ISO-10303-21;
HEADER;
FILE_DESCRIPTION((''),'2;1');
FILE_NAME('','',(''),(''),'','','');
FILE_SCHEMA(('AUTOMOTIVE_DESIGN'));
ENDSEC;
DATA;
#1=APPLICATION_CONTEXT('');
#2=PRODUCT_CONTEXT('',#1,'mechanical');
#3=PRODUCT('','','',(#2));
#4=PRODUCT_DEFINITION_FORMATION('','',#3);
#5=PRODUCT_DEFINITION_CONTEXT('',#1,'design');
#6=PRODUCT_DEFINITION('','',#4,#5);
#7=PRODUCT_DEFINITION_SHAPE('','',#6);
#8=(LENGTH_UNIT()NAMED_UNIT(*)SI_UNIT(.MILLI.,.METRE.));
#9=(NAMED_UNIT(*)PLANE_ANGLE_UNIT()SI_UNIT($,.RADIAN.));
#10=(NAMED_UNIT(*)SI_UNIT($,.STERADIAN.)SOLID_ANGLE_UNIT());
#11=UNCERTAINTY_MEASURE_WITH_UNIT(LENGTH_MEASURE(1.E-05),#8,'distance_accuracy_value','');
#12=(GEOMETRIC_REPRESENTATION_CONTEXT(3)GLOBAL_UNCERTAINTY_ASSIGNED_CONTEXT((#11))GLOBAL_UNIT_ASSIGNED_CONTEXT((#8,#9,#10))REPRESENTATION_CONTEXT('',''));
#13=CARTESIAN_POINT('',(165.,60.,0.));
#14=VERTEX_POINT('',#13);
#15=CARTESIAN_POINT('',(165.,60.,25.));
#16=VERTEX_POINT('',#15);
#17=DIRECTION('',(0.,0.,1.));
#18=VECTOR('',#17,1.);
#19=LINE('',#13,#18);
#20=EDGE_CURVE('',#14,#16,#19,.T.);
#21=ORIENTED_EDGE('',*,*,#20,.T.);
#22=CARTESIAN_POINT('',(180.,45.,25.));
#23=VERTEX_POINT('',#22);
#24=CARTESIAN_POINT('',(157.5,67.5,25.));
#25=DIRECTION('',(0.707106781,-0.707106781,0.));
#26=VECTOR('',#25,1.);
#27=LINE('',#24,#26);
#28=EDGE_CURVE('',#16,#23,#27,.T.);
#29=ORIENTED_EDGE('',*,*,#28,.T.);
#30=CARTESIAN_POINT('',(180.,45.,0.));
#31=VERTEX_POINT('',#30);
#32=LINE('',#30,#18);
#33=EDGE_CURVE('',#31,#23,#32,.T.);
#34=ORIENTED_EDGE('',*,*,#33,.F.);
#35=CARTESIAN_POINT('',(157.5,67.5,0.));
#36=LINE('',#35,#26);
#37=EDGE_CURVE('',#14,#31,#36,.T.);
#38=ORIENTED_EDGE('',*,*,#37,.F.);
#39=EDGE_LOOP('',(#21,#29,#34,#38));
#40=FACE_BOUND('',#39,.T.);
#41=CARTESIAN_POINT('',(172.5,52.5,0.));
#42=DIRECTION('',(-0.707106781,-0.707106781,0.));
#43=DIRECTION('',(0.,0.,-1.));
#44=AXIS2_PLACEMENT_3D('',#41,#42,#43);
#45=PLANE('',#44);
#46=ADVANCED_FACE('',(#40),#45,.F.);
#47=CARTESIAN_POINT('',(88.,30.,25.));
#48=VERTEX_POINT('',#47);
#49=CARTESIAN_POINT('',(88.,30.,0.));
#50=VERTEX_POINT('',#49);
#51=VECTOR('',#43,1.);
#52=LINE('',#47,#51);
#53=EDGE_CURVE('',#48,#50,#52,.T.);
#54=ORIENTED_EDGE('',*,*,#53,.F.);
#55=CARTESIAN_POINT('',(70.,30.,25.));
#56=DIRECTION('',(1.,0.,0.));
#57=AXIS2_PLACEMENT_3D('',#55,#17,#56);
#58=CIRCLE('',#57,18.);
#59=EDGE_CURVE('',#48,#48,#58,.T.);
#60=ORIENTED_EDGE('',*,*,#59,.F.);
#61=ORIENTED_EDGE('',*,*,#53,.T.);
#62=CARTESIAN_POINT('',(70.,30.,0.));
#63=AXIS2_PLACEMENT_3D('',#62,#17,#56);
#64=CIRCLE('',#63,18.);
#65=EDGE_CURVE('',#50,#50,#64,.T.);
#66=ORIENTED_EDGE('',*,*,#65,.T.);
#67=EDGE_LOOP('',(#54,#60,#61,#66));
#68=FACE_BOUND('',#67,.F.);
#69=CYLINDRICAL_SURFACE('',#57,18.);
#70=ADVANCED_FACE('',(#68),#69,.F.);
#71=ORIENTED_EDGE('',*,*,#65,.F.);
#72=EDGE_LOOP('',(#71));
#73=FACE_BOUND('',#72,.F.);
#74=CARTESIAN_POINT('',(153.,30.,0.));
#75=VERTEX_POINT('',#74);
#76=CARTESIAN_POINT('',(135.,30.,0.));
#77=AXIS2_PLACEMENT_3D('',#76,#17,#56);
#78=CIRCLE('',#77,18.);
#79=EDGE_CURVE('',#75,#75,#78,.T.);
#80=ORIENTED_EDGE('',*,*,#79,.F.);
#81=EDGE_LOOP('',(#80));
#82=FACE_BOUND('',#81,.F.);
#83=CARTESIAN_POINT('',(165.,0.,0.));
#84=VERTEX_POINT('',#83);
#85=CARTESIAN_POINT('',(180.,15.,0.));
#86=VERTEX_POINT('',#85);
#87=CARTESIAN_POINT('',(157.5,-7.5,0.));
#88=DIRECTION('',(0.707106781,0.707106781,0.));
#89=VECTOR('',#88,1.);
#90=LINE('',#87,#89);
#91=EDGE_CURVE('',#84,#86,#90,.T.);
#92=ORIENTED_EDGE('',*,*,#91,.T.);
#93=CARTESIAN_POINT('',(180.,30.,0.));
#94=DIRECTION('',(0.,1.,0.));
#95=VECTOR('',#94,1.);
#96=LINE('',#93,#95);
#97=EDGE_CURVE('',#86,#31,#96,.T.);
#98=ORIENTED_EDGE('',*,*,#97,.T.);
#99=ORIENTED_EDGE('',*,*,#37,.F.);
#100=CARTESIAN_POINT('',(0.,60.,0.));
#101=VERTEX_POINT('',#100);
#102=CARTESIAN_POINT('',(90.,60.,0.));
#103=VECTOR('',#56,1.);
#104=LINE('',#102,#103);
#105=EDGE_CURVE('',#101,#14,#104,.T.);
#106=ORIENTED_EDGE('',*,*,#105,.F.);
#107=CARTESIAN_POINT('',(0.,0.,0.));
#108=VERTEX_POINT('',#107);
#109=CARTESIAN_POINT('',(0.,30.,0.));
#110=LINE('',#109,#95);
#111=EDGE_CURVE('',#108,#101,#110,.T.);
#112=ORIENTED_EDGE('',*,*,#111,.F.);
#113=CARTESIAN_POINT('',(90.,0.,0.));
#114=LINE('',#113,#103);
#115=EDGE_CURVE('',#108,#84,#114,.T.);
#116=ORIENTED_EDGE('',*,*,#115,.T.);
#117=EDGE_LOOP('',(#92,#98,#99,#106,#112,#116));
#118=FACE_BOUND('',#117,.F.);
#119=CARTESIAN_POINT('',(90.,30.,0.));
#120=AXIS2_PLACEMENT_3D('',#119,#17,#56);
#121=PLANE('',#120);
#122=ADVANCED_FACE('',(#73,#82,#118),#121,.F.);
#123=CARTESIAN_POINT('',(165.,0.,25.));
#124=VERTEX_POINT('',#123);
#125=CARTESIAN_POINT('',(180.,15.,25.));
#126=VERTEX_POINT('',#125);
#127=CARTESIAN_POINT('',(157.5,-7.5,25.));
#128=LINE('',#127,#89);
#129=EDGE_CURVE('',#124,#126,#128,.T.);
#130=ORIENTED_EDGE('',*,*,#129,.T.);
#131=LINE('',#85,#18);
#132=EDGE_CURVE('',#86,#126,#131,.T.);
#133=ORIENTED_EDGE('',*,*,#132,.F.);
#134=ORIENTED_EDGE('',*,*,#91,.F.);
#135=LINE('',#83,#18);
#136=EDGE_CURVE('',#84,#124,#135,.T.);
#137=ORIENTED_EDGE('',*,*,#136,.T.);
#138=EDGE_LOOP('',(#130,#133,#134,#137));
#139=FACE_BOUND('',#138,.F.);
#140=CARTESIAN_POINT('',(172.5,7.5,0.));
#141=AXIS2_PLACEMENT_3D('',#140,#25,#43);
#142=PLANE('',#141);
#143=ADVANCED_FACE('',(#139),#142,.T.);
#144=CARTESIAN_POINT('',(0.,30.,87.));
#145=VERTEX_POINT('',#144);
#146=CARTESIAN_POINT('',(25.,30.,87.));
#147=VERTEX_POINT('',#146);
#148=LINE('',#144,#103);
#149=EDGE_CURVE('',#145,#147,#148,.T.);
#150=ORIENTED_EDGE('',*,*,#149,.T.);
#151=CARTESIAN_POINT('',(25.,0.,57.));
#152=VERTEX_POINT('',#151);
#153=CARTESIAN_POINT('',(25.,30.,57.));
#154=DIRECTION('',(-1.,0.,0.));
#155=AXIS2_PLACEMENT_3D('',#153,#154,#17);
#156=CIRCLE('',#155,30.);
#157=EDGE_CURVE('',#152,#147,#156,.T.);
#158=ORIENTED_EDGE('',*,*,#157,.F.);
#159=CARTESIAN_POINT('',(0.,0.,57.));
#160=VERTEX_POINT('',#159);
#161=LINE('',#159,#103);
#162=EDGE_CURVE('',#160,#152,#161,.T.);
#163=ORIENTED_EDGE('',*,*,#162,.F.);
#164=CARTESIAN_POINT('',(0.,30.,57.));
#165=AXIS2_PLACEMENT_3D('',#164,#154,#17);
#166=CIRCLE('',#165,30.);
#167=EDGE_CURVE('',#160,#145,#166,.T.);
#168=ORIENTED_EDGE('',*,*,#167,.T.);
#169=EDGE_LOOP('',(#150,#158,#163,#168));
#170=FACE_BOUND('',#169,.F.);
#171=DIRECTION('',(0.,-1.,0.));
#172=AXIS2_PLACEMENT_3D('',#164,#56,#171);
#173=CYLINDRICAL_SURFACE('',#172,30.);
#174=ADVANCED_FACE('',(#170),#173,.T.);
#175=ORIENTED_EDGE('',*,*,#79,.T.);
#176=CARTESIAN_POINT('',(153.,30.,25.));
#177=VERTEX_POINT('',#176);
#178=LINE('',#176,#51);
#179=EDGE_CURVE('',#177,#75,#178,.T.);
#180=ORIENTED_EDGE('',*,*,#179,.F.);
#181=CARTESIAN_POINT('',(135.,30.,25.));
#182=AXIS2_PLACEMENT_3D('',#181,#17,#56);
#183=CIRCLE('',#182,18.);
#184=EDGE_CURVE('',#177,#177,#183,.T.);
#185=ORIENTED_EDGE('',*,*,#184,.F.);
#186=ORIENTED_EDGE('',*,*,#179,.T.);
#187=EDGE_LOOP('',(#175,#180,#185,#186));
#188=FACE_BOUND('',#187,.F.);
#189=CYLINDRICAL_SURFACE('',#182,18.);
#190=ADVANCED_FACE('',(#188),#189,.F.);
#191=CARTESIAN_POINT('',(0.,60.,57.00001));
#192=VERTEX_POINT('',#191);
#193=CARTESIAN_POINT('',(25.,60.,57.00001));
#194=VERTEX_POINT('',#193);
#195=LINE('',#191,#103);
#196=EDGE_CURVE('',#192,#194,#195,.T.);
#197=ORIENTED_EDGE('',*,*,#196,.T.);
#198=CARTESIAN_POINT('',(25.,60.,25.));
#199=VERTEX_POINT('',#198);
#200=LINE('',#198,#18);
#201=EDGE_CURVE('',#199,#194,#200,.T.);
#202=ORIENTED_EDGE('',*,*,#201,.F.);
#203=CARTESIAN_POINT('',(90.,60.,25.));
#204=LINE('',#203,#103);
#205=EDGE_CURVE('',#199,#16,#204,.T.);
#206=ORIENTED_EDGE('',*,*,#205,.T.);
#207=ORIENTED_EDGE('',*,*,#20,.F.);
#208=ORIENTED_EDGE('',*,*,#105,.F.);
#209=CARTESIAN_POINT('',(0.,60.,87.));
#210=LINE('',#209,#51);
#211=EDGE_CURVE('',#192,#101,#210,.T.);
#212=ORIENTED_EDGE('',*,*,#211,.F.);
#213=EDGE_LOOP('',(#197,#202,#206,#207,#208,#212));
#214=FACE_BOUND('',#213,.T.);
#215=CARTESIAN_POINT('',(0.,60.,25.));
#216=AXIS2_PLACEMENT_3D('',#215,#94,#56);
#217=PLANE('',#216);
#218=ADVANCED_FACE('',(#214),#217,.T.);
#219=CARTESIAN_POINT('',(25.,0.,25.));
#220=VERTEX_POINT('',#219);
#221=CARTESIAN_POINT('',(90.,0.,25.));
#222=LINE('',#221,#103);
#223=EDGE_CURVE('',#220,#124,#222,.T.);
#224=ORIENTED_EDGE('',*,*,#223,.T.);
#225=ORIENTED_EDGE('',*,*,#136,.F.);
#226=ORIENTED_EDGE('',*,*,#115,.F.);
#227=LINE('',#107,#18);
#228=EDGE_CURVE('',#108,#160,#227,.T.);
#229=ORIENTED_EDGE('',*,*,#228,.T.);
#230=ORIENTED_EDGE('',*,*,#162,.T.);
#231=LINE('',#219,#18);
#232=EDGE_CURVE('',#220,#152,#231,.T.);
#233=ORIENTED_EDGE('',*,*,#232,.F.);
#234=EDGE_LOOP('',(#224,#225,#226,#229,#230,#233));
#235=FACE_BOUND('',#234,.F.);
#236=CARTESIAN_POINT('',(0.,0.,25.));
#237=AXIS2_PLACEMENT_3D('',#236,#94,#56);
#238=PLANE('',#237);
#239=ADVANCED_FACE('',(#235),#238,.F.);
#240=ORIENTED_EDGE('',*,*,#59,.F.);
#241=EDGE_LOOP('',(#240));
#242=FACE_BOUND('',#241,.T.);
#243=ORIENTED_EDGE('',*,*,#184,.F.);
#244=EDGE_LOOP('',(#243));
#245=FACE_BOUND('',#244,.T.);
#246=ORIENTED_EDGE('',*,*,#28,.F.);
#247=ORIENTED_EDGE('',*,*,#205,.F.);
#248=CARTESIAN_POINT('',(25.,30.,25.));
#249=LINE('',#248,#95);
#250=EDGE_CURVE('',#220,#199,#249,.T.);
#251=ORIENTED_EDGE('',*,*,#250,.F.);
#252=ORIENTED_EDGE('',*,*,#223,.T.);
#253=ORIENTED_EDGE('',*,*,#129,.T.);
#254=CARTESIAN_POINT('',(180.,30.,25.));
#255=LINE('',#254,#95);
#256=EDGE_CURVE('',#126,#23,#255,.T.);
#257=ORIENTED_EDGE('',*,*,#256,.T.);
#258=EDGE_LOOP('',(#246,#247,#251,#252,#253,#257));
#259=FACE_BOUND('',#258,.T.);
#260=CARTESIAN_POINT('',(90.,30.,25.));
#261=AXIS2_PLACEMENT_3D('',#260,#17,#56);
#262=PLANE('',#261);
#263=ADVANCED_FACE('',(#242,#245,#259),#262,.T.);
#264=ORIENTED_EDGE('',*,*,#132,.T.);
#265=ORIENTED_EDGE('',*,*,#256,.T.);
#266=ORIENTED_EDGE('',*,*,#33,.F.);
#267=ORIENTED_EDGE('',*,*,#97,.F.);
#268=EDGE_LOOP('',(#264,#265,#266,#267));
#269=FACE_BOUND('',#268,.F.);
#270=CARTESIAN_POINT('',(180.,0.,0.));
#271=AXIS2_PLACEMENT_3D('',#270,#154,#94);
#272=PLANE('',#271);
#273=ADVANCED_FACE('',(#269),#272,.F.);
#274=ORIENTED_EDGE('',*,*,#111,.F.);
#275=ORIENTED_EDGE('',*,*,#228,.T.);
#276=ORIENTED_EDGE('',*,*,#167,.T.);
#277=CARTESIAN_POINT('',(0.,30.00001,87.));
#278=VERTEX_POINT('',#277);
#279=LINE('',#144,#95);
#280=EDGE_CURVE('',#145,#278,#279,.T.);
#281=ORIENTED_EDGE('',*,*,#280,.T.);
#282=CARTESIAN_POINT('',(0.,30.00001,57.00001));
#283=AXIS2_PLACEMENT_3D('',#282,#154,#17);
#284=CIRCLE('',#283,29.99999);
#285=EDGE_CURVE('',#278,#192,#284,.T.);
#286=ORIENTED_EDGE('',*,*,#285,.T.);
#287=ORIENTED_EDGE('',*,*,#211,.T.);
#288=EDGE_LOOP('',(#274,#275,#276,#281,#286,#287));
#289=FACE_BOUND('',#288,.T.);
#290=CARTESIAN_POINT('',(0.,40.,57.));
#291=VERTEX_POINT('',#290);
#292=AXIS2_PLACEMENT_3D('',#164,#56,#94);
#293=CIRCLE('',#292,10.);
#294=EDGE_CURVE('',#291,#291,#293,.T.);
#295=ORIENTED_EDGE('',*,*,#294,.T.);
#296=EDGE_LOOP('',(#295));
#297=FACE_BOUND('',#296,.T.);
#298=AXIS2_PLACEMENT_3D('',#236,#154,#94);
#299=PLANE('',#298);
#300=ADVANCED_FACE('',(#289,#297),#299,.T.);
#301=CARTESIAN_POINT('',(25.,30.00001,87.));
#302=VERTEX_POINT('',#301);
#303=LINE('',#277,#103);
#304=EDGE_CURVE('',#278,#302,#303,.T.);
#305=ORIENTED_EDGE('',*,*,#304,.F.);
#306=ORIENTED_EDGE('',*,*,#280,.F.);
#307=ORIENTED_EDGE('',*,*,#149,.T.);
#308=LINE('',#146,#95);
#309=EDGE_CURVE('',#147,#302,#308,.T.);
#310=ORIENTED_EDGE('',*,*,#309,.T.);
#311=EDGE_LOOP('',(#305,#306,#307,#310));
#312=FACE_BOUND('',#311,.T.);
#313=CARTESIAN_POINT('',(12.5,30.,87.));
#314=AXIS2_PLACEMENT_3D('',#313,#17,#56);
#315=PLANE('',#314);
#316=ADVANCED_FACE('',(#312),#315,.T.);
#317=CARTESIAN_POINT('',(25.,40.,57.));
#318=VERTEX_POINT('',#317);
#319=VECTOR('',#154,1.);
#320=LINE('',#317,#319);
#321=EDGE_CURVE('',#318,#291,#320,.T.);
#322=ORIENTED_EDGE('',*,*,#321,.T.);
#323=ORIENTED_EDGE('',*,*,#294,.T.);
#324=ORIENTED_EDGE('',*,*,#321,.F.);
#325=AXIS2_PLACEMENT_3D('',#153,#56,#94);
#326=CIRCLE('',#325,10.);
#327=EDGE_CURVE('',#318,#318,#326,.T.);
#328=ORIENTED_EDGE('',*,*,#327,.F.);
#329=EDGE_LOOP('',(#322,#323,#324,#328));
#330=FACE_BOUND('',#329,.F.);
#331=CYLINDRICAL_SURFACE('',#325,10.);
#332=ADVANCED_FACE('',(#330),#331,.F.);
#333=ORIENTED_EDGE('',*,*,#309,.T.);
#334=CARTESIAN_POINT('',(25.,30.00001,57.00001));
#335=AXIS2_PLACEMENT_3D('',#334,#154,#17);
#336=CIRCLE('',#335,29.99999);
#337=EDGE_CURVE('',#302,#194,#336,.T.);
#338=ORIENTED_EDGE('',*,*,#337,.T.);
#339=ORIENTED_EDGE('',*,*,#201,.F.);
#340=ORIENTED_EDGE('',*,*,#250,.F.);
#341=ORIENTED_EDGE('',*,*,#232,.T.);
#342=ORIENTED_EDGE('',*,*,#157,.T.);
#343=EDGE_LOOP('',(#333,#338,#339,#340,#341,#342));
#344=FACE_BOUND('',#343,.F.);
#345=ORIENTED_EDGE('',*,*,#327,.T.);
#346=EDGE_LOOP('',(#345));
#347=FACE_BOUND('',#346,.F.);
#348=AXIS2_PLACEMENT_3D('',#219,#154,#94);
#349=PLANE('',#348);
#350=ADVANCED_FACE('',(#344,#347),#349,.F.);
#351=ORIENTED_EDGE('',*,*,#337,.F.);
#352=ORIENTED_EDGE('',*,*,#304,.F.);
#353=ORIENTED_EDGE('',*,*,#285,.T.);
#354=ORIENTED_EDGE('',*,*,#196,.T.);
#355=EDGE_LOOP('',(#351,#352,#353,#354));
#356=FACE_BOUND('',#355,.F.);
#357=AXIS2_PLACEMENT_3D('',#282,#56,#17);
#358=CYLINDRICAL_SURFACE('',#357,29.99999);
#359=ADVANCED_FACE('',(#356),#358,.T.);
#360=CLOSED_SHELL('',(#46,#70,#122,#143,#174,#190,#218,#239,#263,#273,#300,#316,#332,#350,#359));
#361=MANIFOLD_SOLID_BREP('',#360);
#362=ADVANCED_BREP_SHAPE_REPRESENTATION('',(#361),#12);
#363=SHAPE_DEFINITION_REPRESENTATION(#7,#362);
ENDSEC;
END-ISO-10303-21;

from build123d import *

# Parameters (mm, degrees)
F0_W      = 180
F0_H      = 60
F1_DEPTH  = 25
F2_W      = 25
F2_H      = 60
F3_DEPTH  = 62
F4_R      = 30
F5_R      = 29.99999
F6_R      = 18
F7_DEPTH  = 25
F8_SIZE   = 15
F9_R      = 10
F10_DEPTH = 25.001


# Not quite as in the source:
# - a fillet or chamfer is up to 0.001 mm smaller than in the source, because OpenCascade refuses the exact size


with BuildPart() as f1:
    # F0 (on Top) → F1 (new body)
    with BuildSketch(Plane.XY):
        with Locations((90, 30)):
            Rectangle(F0_W, F0_H)
    extrude(amount=F1_DEPTH)

    # F2 (on face) → F3 (join)
    with BuildSketch(Plane.XY.offset(25)):
        with Locations((12.5, 30)):
            Rectangle(F2_W, F2_H)
    extrude(amount=F3_DEPTH)

    # F4
    f4_edges = [f1.edges().sort_by_distance(p)[0] for p in [
        (12.5, 0, 87),
    ]]
    fillet(f4_edges, radius=F4_R)

    # F5 (radius 30 in the source; OpenCascade refuses exactly that, so slightly less here)
    f5_edges = [f1.edges().sort_by_distance(p)[0] for p in [
        (12.5, 60, 87),
    ]]
    fillet(f5_edges, radius=F5_R)

    # F6 (on face) → F7 (cut)
    with BuildSketch(Plane.XY.offset(25)):
        with Locations((70, 30)):
            Circle(F6_R)
        with Locations((135, 30)):
            Circle(F6_R)
    extrude(amount=-F7_DEPTH, mode=Mode.SUBTRACT)

    # F8
    f8_edges = [f1.edges().sort_by_distance(p)[0] for p in [
        (180, 0, 12.5),
        (180, 60, 12.5),
    ]]
    chamfer(f8_edges, length=F8_SIZE)

    # F9 (on face) → F10 (cut, through all)
    with BuildSketch(Plane.YZ.offset(25)):
        with Locations((30, 57)):
            Circle(F9_R)
    extrude(amount=-F10_DEPTH, mode=Mode.SUBTRACT)


solid = f1.part
